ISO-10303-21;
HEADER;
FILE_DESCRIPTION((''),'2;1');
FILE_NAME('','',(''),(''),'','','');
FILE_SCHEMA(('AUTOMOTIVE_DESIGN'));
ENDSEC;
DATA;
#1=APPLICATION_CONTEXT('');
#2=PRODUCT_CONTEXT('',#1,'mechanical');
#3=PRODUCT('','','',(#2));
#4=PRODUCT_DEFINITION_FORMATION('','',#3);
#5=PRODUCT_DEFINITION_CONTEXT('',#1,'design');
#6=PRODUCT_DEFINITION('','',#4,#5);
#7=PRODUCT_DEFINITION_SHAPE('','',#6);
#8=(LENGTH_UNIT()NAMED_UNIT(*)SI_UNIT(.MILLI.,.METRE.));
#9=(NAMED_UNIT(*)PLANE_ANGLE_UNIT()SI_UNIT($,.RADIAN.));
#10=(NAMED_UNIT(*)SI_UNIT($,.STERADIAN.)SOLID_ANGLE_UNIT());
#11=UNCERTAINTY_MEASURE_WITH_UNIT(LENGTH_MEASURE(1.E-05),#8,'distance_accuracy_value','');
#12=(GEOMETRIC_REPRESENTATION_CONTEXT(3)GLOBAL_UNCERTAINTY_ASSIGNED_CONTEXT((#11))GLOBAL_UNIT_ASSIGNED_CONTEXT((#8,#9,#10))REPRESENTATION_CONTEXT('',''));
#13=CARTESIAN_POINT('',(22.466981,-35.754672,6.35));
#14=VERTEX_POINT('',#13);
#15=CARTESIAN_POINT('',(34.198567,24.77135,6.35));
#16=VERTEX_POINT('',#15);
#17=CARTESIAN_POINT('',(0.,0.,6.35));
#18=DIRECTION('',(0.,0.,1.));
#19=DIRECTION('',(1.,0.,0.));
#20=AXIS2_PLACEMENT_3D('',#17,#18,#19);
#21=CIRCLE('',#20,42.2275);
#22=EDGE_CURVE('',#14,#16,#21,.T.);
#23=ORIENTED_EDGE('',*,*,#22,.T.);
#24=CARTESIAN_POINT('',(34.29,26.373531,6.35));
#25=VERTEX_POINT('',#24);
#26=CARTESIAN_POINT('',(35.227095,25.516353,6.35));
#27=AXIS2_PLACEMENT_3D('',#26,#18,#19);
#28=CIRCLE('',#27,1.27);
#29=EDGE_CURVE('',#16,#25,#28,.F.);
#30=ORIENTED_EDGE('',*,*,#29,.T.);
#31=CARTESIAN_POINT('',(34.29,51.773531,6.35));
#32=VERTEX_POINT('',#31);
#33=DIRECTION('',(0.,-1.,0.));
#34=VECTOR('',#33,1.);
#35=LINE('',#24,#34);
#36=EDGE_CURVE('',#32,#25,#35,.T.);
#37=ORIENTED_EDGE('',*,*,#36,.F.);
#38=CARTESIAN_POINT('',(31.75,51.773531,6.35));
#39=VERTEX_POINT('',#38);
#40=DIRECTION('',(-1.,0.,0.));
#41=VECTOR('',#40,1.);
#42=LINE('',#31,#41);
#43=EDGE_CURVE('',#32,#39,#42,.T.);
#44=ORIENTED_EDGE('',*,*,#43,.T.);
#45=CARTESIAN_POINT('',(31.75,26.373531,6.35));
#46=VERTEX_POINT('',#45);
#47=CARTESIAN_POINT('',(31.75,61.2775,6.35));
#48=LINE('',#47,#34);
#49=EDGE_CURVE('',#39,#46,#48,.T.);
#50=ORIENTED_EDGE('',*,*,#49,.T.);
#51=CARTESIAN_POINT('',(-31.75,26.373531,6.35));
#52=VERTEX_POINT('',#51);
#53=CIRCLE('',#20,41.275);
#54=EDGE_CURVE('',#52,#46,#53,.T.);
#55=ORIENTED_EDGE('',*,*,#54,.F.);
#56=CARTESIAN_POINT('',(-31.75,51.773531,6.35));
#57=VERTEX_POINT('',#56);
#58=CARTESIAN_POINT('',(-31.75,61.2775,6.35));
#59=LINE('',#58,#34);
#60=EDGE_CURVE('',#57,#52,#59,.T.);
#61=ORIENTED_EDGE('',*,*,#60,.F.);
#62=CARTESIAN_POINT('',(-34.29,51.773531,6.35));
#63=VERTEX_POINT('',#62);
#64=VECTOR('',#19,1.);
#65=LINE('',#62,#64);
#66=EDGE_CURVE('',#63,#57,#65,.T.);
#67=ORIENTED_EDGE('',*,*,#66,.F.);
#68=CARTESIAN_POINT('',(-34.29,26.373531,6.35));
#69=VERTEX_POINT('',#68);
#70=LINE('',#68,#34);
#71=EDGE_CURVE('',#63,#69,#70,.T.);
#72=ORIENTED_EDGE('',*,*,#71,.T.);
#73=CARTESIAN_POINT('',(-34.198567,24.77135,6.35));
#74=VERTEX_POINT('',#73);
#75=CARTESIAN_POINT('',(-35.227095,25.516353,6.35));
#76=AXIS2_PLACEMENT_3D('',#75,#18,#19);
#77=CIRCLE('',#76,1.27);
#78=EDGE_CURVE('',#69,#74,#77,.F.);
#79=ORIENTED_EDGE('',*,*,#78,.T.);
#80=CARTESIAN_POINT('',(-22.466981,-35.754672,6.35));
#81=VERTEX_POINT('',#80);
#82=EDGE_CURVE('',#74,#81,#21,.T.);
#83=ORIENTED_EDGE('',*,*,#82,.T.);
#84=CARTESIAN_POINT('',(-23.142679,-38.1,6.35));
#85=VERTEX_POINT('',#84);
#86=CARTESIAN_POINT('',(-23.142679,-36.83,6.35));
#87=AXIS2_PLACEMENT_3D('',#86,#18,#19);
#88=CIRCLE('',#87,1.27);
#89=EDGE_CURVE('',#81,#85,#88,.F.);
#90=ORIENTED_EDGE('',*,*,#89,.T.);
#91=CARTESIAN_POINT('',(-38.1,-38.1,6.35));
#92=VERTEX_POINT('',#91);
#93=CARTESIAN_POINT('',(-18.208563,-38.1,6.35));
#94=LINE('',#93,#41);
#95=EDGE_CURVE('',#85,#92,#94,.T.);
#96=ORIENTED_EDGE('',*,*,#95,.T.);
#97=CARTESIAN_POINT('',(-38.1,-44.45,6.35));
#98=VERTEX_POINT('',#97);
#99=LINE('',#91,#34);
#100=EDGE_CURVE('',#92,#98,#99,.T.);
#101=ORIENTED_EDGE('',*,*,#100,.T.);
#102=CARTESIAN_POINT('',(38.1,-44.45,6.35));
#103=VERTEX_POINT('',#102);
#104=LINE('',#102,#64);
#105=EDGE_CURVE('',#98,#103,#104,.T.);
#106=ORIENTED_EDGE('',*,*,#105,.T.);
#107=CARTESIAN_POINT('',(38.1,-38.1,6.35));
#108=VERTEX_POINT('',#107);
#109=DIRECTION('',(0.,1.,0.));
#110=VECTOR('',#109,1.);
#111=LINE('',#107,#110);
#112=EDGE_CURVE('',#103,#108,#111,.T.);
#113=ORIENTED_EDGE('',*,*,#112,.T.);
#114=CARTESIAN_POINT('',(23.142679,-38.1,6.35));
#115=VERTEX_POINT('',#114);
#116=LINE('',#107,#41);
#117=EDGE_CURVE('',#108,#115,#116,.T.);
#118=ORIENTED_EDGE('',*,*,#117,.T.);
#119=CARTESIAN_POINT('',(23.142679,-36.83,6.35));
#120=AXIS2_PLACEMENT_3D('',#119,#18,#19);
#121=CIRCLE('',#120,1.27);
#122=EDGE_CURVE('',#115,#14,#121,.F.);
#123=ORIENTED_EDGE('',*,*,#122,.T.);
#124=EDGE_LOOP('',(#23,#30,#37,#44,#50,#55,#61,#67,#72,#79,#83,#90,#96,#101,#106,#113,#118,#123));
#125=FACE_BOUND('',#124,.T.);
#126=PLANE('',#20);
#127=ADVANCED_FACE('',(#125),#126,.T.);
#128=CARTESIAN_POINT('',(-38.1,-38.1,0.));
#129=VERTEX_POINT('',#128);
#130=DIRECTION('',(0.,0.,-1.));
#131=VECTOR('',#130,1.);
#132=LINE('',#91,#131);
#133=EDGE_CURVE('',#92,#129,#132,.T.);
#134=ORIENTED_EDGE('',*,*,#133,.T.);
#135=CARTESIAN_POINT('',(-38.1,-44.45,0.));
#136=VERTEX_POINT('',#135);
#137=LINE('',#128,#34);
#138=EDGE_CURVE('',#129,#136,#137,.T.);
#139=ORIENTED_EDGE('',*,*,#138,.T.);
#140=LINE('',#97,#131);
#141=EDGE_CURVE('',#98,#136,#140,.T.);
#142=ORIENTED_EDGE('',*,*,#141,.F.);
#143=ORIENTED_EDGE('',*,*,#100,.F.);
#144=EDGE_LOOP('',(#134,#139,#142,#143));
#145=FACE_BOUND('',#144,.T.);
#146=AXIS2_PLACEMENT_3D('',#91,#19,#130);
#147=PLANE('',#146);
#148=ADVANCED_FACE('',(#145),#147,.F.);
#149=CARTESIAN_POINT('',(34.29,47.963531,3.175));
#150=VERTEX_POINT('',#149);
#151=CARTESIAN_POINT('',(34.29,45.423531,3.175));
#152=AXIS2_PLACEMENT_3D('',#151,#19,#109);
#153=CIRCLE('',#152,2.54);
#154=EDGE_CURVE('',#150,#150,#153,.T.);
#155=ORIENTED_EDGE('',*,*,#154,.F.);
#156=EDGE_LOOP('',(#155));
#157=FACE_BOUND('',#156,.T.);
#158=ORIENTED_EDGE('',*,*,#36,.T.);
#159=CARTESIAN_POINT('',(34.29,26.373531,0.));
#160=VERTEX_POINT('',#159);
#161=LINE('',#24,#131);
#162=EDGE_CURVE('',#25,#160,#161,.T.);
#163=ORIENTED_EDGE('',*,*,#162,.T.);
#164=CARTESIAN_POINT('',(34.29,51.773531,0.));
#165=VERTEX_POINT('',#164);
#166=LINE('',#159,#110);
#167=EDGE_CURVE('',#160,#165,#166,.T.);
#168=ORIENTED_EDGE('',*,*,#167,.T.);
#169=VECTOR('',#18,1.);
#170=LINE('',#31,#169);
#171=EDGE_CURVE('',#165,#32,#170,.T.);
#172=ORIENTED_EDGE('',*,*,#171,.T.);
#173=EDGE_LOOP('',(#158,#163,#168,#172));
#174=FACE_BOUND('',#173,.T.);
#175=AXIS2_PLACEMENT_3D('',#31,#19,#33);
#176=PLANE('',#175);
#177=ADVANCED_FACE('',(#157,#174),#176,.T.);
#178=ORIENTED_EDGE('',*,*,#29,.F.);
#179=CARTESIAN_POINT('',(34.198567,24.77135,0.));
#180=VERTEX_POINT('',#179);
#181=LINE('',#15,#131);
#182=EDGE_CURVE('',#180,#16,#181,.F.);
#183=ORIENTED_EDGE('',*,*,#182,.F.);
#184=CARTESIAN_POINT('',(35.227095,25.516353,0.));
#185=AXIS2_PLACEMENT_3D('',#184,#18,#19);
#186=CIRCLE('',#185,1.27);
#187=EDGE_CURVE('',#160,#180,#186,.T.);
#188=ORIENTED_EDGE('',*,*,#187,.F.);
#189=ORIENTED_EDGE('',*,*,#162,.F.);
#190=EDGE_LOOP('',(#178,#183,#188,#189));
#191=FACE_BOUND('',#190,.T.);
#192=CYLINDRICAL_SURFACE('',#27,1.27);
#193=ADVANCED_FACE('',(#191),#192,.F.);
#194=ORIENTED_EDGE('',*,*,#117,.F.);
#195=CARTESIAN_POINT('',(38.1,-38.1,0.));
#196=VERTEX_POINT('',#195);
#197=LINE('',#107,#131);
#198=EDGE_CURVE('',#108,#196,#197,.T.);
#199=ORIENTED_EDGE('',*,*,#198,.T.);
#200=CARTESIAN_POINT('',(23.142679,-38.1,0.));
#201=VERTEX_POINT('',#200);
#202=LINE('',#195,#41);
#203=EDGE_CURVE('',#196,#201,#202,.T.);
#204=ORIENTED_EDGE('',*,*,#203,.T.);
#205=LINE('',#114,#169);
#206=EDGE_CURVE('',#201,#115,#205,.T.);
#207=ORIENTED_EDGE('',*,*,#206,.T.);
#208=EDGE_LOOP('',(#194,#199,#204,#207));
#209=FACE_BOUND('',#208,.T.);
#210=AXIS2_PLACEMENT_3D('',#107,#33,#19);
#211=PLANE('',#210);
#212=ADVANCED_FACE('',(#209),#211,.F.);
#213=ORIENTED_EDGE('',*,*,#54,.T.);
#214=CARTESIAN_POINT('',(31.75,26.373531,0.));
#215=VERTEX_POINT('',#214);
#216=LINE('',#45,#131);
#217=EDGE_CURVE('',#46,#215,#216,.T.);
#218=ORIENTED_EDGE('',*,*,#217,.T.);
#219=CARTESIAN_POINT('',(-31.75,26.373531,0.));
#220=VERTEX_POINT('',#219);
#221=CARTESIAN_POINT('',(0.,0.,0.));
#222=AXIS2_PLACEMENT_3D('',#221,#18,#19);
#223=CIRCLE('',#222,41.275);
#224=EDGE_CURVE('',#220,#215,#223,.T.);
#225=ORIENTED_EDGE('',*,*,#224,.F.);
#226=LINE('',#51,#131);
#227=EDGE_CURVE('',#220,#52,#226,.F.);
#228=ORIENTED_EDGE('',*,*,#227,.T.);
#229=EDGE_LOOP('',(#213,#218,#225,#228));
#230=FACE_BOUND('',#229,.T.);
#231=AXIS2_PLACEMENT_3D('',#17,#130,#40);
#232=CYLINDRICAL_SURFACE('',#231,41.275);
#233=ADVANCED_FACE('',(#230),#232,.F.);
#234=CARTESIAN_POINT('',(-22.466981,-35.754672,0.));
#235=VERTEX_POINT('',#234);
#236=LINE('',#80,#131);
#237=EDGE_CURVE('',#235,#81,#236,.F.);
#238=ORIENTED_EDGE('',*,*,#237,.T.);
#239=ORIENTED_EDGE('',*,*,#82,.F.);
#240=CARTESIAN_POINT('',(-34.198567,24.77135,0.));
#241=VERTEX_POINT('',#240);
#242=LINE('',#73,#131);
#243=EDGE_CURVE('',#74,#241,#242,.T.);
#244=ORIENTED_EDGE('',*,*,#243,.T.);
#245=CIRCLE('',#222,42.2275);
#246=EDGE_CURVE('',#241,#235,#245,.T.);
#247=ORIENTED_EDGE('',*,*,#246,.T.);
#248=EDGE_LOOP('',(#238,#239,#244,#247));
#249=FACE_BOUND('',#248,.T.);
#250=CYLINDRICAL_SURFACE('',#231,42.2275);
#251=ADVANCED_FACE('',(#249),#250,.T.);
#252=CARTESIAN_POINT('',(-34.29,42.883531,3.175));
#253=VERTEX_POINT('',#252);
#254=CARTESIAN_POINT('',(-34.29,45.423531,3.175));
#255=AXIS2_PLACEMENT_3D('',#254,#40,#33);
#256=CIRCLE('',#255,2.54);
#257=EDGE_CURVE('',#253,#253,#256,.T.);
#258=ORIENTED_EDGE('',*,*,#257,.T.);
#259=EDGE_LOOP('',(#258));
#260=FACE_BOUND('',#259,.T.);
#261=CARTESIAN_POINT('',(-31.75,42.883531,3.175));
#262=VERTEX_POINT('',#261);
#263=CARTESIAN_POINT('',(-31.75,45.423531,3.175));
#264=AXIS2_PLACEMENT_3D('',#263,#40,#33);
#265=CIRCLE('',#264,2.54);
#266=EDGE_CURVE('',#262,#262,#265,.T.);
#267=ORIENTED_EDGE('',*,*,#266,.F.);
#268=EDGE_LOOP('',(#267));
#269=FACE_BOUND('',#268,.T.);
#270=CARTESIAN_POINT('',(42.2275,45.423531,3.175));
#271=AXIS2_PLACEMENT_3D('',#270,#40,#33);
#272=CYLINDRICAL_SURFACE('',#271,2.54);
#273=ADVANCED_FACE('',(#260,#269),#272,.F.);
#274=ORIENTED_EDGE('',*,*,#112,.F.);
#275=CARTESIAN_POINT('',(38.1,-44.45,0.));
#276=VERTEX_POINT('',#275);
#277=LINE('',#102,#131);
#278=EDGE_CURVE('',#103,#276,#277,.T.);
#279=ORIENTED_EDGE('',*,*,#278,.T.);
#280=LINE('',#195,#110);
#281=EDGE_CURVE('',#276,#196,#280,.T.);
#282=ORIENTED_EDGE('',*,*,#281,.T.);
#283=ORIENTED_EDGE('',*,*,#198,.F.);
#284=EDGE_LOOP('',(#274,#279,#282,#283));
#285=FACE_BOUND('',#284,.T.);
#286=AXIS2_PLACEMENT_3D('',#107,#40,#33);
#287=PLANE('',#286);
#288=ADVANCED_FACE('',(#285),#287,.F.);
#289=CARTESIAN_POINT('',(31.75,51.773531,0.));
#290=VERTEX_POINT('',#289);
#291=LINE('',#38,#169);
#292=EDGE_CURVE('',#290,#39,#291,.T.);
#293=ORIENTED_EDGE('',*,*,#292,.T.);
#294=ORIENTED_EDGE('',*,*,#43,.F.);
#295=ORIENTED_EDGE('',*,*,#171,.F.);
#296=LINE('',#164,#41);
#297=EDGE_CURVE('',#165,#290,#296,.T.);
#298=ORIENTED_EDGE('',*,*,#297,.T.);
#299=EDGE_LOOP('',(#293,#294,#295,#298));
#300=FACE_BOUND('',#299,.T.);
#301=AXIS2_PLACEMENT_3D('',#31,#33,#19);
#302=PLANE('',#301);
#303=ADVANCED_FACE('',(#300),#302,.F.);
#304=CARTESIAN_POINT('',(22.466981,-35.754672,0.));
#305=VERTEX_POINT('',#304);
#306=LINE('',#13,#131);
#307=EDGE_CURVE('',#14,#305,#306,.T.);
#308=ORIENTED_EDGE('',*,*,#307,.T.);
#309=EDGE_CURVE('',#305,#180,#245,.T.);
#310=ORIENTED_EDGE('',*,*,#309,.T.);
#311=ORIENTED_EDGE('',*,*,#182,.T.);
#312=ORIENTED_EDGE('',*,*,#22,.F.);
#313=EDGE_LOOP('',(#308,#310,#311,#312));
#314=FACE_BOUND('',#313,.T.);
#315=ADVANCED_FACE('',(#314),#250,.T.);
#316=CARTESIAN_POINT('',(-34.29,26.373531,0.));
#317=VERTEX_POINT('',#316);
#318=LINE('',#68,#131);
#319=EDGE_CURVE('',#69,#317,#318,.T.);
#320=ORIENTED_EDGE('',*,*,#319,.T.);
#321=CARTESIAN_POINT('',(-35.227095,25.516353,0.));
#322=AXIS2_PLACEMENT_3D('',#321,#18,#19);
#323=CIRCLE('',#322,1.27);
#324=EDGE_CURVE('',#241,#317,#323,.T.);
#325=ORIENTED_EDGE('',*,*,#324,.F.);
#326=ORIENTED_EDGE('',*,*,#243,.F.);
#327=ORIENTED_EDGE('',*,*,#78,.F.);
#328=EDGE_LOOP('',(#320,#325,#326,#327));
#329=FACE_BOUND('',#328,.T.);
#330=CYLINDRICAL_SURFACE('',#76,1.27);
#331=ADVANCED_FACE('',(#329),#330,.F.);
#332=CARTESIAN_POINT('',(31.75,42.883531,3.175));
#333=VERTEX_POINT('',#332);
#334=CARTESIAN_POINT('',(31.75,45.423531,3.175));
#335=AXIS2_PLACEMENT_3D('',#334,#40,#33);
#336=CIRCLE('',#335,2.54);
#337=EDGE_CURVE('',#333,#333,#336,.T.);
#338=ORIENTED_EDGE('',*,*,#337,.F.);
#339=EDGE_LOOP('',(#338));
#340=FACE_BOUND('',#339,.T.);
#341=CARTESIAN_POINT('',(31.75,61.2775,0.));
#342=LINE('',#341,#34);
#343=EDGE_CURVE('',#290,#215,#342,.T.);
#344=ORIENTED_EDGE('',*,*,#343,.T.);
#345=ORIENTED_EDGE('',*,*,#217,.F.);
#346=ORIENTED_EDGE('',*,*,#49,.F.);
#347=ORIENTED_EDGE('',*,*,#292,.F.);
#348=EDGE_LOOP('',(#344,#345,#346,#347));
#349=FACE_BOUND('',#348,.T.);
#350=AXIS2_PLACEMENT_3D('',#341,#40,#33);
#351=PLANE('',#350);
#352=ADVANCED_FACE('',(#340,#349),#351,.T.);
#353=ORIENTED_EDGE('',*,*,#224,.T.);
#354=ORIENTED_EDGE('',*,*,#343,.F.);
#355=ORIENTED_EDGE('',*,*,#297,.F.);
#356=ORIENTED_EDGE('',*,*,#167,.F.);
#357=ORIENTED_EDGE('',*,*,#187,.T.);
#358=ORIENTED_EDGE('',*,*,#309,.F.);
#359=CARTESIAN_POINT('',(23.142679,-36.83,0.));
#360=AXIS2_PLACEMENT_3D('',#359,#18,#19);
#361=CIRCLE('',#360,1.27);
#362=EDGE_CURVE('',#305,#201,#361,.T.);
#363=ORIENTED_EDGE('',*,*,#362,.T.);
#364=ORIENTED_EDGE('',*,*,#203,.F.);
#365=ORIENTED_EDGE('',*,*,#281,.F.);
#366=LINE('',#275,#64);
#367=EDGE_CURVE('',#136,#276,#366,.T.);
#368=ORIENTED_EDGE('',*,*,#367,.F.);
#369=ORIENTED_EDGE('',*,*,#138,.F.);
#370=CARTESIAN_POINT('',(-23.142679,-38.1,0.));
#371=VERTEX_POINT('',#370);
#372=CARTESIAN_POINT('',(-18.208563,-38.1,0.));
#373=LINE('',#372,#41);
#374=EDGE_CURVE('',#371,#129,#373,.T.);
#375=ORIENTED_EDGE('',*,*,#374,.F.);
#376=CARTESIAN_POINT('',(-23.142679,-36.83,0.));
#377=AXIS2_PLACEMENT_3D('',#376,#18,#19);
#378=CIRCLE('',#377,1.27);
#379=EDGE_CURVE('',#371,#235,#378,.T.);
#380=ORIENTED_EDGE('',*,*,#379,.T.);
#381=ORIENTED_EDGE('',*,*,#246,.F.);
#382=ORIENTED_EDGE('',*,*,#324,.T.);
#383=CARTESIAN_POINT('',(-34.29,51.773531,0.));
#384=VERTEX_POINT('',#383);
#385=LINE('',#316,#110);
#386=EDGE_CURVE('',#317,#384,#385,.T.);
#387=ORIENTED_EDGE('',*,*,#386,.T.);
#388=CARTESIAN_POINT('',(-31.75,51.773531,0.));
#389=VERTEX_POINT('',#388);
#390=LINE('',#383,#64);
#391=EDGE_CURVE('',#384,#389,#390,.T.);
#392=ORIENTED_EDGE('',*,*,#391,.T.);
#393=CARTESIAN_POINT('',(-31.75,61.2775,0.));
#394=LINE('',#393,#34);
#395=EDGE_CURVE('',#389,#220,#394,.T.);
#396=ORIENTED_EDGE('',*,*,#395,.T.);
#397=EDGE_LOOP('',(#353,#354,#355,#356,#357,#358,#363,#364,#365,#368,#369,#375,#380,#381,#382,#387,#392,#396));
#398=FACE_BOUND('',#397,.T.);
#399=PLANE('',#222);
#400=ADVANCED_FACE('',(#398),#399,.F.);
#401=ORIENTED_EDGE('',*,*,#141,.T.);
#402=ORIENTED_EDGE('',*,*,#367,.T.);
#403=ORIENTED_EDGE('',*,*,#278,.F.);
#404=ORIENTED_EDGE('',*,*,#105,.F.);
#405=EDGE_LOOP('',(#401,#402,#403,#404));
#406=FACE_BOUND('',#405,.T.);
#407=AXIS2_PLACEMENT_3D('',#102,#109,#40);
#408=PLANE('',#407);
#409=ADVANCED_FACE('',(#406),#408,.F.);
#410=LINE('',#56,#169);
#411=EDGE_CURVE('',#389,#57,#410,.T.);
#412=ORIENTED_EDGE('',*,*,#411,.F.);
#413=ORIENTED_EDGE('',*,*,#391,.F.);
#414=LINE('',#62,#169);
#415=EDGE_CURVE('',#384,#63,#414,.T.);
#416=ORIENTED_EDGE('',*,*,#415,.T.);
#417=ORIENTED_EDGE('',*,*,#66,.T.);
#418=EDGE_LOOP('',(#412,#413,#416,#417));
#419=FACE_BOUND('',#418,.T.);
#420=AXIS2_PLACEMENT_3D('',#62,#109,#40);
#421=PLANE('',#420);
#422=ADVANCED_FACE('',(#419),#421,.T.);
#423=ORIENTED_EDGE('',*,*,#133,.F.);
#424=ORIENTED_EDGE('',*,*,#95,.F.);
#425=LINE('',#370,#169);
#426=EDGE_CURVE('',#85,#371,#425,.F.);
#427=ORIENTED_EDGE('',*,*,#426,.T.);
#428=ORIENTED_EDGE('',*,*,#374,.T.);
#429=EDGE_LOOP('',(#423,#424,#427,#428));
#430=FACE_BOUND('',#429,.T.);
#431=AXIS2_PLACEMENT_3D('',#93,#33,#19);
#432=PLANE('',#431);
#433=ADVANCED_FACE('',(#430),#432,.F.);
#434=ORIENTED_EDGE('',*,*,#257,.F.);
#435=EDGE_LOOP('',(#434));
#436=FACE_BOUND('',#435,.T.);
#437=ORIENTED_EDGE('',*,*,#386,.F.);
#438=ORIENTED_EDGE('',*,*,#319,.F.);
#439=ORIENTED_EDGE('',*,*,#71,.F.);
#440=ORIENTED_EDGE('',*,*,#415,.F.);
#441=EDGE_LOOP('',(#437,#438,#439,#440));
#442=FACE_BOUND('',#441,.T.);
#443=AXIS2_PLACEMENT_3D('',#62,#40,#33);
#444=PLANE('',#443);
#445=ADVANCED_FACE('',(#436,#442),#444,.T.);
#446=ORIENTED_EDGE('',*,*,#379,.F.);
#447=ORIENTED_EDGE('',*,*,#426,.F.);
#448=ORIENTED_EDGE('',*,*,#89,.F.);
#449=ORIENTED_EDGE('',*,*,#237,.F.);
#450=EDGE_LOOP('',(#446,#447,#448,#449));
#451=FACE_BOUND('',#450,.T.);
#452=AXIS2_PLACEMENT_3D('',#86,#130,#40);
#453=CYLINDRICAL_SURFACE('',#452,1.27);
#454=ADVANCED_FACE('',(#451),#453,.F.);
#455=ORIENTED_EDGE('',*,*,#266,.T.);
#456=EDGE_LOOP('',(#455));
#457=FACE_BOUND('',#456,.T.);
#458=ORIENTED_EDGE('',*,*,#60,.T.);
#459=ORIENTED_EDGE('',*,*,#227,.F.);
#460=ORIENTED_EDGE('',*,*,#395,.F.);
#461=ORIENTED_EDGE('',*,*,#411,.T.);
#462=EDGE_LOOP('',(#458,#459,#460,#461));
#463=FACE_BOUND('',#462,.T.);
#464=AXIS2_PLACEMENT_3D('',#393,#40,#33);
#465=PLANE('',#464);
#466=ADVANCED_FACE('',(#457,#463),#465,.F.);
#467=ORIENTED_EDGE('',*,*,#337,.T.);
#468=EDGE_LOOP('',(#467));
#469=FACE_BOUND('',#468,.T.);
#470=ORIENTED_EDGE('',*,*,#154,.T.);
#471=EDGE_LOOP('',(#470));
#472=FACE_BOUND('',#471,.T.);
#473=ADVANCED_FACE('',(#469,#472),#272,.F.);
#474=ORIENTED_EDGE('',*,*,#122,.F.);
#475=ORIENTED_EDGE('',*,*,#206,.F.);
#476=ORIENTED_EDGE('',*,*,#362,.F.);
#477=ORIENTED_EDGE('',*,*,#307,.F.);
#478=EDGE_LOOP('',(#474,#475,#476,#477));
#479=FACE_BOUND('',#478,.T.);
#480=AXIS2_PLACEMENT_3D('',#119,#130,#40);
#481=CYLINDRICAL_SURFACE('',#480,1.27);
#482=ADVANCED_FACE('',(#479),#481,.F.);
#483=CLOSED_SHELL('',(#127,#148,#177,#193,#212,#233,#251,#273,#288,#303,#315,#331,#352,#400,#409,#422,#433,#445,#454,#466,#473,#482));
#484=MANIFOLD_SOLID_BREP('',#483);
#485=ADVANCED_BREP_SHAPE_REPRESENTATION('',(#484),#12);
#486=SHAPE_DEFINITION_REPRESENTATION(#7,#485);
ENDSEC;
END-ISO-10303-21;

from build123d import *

# Parameters (mm, degrees)
SKETCH1_R            = 41.275
BOSS_EXTRUDE1_DEPTH  = 6.35
FILLET1_R            = 1.27
SKETCH2_W            = 63.5
SKETCH2_H            = 38.1
CUT_EXTRUDE1_DEPTH   = 6.35
SKETCH3_W            = 6.35
SKETCH3_H            = 25.4
BOSS_EXTRUDE2_DEPTH  = 2.54
FILLET2_R            = 1.27
FILLET2_OF_MIRROR1_R = 1.27
SKETCH6_R            = 2.54
CUT_EXTRUDE2_DEPTH   = 93.605338907


with BuildPart() as part:
    # Sketch1 → Boss-Extrude1 (new body)
    with BuildSketch(Plane.XY):
        with BuildLine():
            Line((-18.208562718, -38.1), (-38.1, -38.1))
            Line((-38.1, -38.1), (-38.1, -44.45))
            Line((-38.1, -44.45), (38.1, -44.45))
            Line((38.1, -44.45), (38.1, -38.1))
            Line((38.1, -38.1), (18.208562718, -38.1))
            ThreePointArc((18.208562718, -38.1), (0, 42.2275), (-18.208562718, -38.1))
        make_face()
        Circle(SKETCH1_R, mode=Mode.SUBTRACT)
    extrude(amount=BOSS_EXTRUDE1_DEPTH)

    # Fillet1
    fillet1_edges = [part.edges().sort_by_distance(p)[0] for p in [
        (-18.208562718, -38.1, 3.175),
        (18.208562718, -38.1, 3.175),
    ]]
    fillet(fillet1_edges, radius=FILLET1_R)

    # Sketch2 → Cut-Extrude1 (cut)
    with BuildSketch(Plane.XY.offset(6.35)):
        with Locations((0, 42.2275)):
            Rectangle(SKETCH2_W, SKETCH2_H)
    cut_extrude1 = extrude(amount=-CUT_EXTRUDE1_DEPTH, mode=Mode.SUBTRACT)

    # Sketch3 → Boss-Extrude2 (add)
    with BuildSketch(Plane(origin=(-31.75, 0, 0), x_dir=(0, 0, -1), z_dir=(1, 0, 0))):
        with Locations((-3.175, 39.073530765)):
            Rectangle(SKETCH3_W, SKETCH3_H)
    boss_extrude2 = extrude(amount=-BOSS_EXTRUDE2_DEPTH)

    # Fillet2
    # the kernel refuses this fillet: 1.27 mm, written as the material it adds along each edge
    with BuildSketch(Plane(origin=(-32.978760305, 26.373530765, 6.35), x_dir=(-0.6057595790113751, -0.7956477439394658, 0), z_dir=(0, 0, -1))) as fillet2_piece_1:
        with BuildLine():
            CenterArc((2.043961499, 1.269638951), FILLET2_R, 190.266768482, 78.366985191)
            Line((0.794296006, 1.043284905), (0.769302696, 1.038757824))
            ThreePointArc((0.769302696, 1.038757824), (0.37693855, 0.537028746), (-0.020209453, 0.015386293))
            Line((-0.020209453, 0.015386293), (0.000605618, -0.025392779))
            ThreePointArc((0.000605618, -0.025392779), (1.006840294, -0.013395128), (2.01307497, -0.025392779))
            Line((2.01307497, -0.025392779), (2.013680588, 0))
        make_face()
    extrude(amount=6.35)

    # Mirror1: Cut-Extrude1, Boss-Extrude2 across plane
    add(cut_extrude1.mirror(Plane(origin=(0, 0, 0), x_dir=(0, 0, 1), z_dir=(1, 0, 0))), mode=Mode.SUBTRACT)
    add(boss_extrude2.mirror(Plane(origin=(0, 0, 0), x_dir=(0, 0, 1), z_dir=(1, 0, 0))))

    # Fillet2 of Mirror1
    # the kernel refuses this fillet: 1.27 mm, written as the material it adds along each edge
    with BuildSketch(Plane(origin=(32.978760305, 26.373530765, 6.35), x_dir=(1, 0, 0), z_dir=(0, 0, -1))) as fillet2_of_mirror1_piece_1:
        with BuildLine():
            CenterArc((2.248334624, 0.857177399), FILLET2_OF_MIRROR1_R, 144.082725892, 78.366985191)
            Line((1.219806305, 1.602180417), (1.199235739, 1.617080477))
            ThreePointArc((1.199235739, 1.617080477), (0.59924535, 0.809204435), (-0.019836848, 0.015863778))
            Line((-0.019836848, 0.015863778), (0, -0.0254))
            ThreePointArc((0, -0.0254), (0.655619848, -0.0254), (1.292497796, -0.017143548))
            Line((1.292497796, -0.017143548), (1.311239695, 0))
        make_face()
    extrude(amount=6.35)

    # Sketch6 → Cut-Extrude2 (cut, through all)
    with BuildSketch(Plane.ZY.offset(34.29)):
        with Locations(Location((3.175, 45.423530765, 0), (0, 0, 270))):
            Circle(SKETCH6_R)
    extrude(amount=-CUT_EXTRUDE2_DEPTH, mode=Mode.SUBTRACT)


solid = part.part
